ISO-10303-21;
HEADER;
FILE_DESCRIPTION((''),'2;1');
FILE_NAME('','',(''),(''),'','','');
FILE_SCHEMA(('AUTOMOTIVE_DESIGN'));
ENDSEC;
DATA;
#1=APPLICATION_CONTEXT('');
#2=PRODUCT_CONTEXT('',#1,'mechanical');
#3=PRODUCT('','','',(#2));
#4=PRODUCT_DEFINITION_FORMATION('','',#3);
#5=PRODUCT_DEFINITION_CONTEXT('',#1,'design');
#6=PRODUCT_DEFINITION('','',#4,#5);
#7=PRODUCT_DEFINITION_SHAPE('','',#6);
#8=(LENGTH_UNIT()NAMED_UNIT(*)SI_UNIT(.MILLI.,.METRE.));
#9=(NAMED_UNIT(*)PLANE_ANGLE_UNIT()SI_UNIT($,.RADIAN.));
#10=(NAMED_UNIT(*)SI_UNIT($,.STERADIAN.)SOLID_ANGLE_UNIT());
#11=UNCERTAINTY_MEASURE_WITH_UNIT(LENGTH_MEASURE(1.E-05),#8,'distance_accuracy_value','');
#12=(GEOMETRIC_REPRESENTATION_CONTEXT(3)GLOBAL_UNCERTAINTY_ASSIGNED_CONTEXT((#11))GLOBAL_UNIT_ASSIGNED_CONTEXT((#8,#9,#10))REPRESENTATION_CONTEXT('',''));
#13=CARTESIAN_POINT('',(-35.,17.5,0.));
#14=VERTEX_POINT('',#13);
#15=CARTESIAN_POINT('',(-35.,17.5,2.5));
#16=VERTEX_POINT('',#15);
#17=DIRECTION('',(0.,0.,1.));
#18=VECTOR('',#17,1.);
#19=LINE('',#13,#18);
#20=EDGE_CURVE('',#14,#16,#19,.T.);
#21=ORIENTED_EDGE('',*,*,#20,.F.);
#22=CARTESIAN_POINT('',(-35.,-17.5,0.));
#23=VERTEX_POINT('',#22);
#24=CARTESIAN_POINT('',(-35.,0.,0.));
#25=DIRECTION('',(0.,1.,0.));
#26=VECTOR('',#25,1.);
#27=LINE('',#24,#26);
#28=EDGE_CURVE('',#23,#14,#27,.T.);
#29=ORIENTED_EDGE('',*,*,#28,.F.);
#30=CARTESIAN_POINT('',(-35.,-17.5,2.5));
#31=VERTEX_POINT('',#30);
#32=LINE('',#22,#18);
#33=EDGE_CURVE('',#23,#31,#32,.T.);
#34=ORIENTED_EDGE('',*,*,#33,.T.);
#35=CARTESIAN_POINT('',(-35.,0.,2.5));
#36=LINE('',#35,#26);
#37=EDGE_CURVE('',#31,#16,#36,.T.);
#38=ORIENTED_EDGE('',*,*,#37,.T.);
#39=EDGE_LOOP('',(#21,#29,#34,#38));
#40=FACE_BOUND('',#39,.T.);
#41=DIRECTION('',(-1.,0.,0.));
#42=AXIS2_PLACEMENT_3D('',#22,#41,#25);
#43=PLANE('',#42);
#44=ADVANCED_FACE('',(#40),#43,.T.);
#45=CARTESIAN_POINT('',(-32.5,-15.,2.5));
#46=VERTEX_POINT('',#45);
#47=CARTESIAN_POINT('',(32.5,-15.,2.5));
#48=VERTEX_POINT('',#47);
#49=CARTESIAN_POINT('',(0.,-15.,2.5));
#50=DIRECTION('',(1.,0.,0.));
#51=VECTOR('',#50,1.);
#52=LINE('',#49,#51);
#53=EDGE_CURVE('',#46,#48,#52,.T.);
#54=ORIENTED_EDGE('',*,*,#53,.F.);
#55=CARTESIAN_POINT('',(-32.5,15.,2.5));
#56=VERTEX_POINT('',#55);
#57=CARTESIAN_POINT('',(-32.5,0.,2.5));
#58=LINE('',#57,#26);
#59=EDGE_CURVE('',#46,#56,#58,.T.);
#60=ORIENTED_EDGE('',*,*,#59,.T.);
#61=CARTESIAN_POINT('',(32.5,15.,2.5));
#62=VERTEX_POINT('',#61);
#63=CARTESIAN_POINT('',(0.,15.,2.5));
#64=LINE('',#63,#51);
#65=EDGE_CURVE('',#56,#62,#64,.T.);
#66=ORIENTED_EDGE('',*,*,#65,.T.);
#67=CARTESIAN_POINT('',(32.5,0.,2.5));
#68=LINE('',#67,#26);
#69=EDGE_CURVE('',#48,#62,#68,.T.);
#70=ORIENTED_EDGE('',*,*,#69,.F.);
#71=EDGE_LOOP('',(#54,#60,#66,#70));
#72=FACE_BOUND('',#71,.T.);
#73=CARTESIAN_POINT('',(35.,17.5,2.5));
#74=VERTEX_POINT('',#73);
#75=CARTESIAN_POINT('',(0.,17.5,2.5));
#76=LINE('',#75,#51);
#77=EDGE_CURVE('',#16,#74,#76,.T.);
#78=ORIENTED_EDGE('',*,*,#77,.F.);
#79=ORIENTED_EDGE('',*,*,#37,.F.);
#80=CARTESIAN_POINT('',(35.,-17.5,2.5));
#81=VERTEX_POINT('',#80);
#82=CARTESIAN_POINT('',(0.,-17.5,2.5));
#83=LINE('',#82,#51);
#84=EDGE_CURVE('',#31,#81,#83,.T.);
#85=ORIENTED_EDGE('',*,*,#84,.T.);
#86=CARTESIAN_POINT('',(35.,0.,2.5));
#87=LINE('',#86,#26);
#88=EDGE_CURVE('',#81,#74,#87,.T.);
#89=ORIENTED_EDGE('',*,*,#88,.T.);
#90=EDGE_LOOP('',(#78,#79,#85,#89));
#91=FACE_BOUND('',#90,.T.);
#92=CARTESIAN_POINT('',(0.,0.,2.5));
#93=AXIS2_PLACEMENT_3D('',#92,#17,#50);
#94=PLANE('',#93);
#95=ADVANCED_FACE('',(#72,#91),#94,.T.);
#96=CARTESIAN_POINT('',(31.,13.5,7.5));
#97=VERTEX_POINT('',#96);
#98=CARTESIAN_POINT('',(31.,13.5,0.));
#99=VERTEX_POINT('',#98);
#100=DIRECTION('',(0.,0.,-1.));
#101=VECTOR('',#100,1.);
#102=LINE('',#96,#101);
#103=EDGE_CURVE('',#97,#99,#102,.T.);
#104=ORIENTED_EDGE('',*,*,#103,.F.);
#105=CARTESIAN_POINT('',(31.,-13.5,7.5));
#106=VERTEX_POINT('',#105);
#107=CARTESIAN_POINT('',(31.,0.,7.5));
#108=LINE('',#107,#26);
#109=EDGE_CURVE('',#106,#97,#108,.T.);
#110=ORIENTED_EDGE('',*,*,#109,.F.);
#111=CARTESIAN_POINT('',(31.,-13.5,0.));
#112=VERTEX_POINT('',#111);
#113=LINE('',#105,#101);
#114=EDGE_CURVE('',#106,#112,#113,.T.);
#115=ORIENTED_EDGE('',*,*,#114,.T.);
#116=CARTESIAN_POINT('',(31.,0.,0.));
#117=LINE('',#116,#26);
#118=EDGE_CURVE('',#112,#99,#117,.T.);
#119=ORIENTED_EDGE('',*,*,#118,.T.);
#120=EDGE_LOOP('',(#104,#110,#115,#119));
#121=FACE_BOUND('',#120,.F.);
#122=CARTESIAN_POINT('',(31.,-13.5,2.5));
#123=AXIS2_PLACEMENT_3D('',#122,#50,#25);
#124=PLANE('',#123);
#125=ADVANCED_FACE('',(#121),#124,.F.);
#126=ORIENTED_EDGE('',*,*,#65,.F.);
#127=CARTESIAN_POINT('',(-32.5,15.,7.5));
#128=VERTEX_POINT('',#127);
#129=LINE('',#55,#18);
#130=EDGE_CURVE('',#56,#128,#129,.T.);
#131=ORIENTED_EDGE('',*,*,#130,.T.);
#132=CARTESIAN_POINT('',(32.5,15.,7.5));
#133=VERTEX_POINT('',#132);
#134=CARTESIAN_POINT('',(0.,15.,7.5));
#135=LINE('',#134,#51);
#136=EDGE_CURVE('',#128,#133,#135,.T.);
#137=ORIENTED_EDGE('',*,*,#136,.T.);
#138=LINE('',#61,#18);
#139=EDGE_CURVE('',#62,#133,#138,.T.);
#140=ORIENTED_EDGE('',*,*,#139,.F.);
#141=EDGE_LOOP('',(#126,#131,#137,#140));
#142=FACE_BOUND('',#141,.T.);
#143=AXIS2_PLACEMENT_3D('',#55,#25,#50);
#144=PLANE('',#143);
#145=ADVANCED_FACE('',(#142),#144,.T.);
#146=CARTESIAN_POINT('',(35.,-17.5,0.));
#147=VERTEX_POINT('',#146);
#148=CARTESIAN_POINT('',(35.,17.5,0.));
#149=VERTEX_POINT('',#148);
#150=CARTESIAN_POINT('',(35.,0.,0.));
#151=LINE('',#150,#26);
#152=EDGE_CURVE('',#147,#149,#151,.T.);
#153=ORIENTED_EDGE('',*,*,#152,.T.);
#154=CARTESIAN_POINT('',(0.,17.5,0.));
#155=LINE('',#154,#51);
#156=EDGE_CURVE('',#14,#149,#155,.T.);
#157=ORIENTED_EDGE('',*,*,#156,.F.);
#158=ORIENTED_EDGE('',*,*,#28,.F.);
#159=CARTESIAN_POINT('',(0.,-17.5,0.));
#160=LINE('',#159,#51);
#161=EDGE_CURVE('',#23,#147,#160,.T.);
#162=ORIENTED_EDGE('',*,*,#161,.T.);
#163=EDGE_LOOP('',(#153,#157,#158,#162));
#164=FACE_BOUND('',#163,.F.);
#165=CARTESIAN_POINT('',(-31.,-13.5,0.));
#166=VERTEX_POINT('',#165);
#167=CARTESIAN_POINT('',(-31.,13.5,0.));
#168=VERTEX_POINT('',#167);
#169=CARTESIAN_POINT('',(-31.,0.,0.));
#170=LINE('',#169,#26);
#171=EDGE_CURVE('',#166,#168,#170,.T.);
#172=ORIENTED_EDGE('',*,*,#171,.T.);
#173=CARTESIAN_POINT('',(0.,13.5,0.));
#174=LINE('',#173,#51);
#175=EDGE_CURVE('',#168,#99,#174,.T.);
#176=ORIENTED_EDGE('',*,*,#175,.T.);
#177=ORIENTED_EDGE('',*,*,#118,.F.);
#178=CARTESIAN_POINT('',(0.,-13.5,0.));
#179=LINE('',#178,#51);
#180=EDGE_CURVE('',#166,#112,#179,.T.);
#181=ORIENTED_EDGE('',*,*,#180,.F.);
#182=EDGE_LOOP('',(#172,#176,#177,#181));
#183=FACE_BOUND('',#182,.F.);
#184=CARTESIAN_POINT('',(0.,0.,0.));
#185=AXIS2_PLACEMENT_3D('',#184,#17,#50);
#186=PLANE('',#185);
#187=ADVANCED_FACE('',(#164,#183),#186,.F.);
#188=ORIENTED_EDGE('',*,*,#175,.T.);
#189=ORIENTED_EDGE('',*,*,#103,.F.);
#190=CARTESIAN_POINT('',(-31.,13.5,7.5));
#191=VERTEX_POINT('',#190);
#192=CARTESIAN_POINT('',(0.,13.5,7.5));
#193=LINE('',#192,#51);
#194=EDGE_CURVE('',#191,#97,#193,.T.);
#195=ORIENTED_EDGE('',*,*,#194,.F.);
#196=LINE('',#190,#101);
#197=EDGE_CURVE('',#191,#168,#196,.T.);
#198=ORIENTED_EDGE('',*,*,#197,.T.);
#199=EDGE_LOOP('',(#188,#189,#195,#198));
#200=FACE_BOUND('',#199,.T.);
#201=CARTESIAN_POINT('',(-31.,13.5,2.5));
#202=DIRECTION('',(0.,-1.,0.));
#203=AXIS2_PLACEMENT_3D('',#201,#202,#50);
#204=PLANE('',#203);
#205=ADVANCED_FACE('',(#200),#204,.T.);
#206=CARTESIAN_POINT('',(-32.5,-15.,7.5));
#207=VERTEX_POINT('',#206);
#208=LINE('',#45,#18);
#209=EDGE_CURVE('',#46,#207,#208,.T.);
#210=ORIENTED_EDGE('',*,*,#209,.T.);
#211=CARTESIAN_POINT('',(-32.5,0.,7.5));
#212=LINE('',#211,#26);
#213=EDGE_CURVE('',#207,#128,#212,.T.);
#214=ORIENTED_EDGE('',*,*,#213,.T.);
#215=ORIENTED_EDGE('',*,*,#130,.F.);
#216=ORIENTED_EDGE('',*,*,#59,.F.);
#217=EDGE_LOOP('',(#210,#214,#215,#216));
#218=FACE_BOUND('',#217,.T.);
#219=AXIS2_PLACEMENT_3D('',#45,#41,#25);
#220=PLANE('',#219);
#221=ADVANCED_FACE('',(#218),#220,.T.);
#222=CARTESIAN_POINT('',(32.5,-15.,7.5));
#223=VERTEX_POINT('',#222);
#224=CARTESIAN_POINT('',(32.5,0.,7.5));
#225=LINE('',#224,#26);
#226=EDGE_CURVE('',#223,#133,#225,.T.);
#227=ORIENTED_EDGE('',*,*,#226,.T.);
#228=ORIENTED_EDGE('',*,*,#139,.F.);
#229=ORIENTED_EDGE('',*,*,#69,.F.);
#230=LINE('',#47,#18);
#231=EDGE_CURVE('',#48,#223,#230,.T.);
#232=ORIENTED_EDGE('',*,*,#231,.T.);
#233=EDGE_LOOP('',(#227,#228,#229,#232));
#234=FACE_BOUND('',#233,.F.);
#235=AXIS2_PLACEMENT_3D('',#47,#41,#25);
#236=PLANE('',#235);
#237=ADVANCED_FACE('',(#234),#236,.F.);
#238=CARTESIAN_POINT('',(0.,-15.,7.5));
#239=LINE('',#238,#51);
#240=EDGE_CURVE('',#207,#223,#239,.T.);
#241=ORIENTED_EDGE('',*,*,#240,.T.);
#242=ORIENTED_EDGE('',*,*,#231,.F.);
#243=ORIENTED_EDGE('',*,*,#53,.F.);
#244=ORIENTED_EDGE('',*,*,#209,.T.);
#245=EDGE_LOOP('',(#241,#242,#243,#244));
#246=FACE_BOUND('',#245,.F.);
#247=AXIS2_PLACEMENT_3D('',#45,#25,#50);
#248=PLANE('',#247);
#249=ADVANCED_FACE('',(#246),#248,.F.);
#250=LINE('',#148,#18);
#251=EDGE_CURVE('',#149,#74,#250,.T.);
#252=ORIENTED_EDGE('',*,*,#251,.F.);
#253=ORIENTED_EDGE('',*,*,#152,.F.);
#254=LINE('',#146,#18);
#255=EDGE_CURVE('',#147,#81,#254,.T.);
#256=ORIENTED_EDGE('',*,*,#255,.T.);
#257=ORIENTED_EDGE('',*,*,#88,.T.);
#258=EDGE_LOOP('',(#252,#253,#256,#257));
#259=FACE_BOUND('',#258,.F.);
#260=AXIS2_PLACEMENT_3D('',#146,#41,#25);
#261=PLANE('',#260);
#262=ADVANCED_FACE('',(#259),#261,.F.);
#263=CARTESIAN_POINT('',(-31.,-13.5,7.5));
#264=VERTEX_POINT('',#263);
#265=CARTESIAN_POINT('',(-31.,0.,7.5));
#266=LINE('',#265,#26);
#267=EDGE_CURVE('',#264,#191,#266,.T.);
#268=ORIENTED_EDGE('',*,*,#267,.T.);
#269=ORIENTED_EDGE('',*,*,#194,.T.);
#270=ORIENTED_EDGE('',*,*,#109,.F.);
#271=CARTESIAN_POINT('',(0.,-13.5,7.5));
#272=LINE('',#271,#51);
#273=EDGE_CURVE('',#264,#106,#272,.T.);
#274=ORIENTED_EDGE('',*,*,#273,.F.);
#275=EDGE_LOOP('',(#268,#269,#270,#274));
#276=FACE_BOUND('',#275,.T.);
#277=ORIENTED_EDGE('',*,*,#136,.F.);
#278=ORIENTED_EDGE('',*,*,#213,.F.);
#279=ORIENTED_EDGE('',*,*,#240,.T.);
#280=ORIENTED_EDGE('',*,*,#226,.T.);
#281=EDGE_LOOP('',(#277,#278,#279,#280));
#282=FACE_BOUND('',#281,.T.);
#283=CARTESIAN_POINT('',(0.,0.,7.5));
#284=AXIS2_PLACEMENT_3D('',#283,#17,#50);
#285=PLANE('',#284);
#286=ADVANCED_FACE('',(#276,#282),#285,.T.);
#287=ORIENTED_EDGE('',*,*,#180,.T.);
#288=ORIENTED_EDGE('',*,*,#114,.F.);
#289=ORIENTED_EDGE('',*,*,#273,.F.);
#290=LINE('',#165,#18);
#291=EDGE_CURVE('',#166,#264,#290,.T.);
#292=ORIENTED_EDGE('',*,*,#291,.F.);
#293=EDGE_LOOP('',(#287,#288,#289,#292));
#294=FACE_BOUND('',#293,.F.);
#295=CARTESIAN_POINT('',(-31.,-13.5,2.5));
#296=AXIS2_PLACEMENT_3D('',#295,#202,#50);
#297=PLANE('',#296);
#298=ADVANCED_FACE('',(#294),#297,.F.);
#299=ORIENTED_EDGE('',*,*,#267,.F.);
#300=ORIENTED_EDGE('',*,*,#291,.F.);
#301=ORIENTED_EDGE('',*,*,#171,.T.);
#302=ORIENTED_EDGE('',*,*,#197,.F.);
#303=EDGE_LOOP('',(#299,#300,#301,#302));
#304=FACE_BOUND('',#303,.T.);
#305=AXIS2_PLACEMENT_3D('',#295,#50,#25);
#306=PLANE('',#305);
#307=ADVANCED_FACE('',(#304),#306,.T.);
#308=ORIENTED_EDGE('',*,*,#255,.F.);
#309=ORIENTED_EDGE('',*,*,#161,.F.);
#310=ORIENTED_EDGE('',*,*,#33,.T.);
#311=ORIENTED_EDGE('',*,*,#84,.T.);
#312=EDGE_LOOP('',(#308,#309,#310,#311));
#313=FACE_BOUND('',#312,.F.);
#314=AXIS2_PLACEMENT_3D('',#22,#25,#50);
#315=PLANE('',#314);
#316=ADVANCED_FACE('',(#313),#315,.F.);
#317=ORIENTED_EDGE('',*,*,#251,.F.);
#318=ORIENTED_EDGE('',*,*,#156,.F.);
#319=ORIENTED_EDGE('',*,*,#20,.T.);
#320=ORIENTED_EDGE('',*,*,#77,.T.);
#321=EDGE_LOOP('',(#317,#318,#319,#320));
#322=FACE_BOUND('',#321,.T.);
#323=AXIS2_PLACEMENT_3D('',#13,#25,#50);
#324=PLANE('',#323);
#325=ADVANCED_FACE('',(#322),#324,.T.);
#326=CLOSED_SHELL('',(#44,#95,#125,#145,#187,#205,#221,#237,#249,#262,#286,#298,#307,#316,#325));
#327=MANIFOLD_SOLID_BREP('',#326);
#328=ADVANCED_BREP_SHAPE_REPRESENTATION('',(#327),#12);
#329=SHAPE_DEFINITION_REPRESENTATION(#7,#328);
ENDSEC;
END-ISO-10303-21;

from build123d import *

# Parameters (mm, degrees)
F0_W     = 70
F0_H     = 35
F1_DEPTH = 2.5
F2_W     = 65
F2_H     = 30
F2_W_2   = 62
F2_H_2   = 27
F3_DEPTH = 5
F4_DEPTH = 2.5


# Not quite as in the source:
# - the program builds the solid bodies; features that only make, move or delete a surface that nothing else refers to are left out


with BuildPart() as f1:
    # F0 (on Top) → F1 (new body)
    with BuildSketch(Plane.XY):
        Rectangle(F0_W, F0_H)
    extrude(amount=F1_DEPTH)

    # F2 (on face) → F3 (join)
    with BuildSketch(Plane.XY.offset(2.5)):
        Rectangle(F2_W, F2_H)
        Rectangle(F2_W_2, F2_H_2, mode=Mode.SUBTRACT)
    extrude(amount=F3_DEPTH)

    # F4 (cut, through all): a face of the model
    f4_faces = [f1.faces().sort_by_distance(p)[0] for p in [
        (0, 0, 2.5),
    ]]
    extrude(f4_faces, amount=-F4_DEPTH, mode=Mode.SUBTRACT)


solid = f1.part
